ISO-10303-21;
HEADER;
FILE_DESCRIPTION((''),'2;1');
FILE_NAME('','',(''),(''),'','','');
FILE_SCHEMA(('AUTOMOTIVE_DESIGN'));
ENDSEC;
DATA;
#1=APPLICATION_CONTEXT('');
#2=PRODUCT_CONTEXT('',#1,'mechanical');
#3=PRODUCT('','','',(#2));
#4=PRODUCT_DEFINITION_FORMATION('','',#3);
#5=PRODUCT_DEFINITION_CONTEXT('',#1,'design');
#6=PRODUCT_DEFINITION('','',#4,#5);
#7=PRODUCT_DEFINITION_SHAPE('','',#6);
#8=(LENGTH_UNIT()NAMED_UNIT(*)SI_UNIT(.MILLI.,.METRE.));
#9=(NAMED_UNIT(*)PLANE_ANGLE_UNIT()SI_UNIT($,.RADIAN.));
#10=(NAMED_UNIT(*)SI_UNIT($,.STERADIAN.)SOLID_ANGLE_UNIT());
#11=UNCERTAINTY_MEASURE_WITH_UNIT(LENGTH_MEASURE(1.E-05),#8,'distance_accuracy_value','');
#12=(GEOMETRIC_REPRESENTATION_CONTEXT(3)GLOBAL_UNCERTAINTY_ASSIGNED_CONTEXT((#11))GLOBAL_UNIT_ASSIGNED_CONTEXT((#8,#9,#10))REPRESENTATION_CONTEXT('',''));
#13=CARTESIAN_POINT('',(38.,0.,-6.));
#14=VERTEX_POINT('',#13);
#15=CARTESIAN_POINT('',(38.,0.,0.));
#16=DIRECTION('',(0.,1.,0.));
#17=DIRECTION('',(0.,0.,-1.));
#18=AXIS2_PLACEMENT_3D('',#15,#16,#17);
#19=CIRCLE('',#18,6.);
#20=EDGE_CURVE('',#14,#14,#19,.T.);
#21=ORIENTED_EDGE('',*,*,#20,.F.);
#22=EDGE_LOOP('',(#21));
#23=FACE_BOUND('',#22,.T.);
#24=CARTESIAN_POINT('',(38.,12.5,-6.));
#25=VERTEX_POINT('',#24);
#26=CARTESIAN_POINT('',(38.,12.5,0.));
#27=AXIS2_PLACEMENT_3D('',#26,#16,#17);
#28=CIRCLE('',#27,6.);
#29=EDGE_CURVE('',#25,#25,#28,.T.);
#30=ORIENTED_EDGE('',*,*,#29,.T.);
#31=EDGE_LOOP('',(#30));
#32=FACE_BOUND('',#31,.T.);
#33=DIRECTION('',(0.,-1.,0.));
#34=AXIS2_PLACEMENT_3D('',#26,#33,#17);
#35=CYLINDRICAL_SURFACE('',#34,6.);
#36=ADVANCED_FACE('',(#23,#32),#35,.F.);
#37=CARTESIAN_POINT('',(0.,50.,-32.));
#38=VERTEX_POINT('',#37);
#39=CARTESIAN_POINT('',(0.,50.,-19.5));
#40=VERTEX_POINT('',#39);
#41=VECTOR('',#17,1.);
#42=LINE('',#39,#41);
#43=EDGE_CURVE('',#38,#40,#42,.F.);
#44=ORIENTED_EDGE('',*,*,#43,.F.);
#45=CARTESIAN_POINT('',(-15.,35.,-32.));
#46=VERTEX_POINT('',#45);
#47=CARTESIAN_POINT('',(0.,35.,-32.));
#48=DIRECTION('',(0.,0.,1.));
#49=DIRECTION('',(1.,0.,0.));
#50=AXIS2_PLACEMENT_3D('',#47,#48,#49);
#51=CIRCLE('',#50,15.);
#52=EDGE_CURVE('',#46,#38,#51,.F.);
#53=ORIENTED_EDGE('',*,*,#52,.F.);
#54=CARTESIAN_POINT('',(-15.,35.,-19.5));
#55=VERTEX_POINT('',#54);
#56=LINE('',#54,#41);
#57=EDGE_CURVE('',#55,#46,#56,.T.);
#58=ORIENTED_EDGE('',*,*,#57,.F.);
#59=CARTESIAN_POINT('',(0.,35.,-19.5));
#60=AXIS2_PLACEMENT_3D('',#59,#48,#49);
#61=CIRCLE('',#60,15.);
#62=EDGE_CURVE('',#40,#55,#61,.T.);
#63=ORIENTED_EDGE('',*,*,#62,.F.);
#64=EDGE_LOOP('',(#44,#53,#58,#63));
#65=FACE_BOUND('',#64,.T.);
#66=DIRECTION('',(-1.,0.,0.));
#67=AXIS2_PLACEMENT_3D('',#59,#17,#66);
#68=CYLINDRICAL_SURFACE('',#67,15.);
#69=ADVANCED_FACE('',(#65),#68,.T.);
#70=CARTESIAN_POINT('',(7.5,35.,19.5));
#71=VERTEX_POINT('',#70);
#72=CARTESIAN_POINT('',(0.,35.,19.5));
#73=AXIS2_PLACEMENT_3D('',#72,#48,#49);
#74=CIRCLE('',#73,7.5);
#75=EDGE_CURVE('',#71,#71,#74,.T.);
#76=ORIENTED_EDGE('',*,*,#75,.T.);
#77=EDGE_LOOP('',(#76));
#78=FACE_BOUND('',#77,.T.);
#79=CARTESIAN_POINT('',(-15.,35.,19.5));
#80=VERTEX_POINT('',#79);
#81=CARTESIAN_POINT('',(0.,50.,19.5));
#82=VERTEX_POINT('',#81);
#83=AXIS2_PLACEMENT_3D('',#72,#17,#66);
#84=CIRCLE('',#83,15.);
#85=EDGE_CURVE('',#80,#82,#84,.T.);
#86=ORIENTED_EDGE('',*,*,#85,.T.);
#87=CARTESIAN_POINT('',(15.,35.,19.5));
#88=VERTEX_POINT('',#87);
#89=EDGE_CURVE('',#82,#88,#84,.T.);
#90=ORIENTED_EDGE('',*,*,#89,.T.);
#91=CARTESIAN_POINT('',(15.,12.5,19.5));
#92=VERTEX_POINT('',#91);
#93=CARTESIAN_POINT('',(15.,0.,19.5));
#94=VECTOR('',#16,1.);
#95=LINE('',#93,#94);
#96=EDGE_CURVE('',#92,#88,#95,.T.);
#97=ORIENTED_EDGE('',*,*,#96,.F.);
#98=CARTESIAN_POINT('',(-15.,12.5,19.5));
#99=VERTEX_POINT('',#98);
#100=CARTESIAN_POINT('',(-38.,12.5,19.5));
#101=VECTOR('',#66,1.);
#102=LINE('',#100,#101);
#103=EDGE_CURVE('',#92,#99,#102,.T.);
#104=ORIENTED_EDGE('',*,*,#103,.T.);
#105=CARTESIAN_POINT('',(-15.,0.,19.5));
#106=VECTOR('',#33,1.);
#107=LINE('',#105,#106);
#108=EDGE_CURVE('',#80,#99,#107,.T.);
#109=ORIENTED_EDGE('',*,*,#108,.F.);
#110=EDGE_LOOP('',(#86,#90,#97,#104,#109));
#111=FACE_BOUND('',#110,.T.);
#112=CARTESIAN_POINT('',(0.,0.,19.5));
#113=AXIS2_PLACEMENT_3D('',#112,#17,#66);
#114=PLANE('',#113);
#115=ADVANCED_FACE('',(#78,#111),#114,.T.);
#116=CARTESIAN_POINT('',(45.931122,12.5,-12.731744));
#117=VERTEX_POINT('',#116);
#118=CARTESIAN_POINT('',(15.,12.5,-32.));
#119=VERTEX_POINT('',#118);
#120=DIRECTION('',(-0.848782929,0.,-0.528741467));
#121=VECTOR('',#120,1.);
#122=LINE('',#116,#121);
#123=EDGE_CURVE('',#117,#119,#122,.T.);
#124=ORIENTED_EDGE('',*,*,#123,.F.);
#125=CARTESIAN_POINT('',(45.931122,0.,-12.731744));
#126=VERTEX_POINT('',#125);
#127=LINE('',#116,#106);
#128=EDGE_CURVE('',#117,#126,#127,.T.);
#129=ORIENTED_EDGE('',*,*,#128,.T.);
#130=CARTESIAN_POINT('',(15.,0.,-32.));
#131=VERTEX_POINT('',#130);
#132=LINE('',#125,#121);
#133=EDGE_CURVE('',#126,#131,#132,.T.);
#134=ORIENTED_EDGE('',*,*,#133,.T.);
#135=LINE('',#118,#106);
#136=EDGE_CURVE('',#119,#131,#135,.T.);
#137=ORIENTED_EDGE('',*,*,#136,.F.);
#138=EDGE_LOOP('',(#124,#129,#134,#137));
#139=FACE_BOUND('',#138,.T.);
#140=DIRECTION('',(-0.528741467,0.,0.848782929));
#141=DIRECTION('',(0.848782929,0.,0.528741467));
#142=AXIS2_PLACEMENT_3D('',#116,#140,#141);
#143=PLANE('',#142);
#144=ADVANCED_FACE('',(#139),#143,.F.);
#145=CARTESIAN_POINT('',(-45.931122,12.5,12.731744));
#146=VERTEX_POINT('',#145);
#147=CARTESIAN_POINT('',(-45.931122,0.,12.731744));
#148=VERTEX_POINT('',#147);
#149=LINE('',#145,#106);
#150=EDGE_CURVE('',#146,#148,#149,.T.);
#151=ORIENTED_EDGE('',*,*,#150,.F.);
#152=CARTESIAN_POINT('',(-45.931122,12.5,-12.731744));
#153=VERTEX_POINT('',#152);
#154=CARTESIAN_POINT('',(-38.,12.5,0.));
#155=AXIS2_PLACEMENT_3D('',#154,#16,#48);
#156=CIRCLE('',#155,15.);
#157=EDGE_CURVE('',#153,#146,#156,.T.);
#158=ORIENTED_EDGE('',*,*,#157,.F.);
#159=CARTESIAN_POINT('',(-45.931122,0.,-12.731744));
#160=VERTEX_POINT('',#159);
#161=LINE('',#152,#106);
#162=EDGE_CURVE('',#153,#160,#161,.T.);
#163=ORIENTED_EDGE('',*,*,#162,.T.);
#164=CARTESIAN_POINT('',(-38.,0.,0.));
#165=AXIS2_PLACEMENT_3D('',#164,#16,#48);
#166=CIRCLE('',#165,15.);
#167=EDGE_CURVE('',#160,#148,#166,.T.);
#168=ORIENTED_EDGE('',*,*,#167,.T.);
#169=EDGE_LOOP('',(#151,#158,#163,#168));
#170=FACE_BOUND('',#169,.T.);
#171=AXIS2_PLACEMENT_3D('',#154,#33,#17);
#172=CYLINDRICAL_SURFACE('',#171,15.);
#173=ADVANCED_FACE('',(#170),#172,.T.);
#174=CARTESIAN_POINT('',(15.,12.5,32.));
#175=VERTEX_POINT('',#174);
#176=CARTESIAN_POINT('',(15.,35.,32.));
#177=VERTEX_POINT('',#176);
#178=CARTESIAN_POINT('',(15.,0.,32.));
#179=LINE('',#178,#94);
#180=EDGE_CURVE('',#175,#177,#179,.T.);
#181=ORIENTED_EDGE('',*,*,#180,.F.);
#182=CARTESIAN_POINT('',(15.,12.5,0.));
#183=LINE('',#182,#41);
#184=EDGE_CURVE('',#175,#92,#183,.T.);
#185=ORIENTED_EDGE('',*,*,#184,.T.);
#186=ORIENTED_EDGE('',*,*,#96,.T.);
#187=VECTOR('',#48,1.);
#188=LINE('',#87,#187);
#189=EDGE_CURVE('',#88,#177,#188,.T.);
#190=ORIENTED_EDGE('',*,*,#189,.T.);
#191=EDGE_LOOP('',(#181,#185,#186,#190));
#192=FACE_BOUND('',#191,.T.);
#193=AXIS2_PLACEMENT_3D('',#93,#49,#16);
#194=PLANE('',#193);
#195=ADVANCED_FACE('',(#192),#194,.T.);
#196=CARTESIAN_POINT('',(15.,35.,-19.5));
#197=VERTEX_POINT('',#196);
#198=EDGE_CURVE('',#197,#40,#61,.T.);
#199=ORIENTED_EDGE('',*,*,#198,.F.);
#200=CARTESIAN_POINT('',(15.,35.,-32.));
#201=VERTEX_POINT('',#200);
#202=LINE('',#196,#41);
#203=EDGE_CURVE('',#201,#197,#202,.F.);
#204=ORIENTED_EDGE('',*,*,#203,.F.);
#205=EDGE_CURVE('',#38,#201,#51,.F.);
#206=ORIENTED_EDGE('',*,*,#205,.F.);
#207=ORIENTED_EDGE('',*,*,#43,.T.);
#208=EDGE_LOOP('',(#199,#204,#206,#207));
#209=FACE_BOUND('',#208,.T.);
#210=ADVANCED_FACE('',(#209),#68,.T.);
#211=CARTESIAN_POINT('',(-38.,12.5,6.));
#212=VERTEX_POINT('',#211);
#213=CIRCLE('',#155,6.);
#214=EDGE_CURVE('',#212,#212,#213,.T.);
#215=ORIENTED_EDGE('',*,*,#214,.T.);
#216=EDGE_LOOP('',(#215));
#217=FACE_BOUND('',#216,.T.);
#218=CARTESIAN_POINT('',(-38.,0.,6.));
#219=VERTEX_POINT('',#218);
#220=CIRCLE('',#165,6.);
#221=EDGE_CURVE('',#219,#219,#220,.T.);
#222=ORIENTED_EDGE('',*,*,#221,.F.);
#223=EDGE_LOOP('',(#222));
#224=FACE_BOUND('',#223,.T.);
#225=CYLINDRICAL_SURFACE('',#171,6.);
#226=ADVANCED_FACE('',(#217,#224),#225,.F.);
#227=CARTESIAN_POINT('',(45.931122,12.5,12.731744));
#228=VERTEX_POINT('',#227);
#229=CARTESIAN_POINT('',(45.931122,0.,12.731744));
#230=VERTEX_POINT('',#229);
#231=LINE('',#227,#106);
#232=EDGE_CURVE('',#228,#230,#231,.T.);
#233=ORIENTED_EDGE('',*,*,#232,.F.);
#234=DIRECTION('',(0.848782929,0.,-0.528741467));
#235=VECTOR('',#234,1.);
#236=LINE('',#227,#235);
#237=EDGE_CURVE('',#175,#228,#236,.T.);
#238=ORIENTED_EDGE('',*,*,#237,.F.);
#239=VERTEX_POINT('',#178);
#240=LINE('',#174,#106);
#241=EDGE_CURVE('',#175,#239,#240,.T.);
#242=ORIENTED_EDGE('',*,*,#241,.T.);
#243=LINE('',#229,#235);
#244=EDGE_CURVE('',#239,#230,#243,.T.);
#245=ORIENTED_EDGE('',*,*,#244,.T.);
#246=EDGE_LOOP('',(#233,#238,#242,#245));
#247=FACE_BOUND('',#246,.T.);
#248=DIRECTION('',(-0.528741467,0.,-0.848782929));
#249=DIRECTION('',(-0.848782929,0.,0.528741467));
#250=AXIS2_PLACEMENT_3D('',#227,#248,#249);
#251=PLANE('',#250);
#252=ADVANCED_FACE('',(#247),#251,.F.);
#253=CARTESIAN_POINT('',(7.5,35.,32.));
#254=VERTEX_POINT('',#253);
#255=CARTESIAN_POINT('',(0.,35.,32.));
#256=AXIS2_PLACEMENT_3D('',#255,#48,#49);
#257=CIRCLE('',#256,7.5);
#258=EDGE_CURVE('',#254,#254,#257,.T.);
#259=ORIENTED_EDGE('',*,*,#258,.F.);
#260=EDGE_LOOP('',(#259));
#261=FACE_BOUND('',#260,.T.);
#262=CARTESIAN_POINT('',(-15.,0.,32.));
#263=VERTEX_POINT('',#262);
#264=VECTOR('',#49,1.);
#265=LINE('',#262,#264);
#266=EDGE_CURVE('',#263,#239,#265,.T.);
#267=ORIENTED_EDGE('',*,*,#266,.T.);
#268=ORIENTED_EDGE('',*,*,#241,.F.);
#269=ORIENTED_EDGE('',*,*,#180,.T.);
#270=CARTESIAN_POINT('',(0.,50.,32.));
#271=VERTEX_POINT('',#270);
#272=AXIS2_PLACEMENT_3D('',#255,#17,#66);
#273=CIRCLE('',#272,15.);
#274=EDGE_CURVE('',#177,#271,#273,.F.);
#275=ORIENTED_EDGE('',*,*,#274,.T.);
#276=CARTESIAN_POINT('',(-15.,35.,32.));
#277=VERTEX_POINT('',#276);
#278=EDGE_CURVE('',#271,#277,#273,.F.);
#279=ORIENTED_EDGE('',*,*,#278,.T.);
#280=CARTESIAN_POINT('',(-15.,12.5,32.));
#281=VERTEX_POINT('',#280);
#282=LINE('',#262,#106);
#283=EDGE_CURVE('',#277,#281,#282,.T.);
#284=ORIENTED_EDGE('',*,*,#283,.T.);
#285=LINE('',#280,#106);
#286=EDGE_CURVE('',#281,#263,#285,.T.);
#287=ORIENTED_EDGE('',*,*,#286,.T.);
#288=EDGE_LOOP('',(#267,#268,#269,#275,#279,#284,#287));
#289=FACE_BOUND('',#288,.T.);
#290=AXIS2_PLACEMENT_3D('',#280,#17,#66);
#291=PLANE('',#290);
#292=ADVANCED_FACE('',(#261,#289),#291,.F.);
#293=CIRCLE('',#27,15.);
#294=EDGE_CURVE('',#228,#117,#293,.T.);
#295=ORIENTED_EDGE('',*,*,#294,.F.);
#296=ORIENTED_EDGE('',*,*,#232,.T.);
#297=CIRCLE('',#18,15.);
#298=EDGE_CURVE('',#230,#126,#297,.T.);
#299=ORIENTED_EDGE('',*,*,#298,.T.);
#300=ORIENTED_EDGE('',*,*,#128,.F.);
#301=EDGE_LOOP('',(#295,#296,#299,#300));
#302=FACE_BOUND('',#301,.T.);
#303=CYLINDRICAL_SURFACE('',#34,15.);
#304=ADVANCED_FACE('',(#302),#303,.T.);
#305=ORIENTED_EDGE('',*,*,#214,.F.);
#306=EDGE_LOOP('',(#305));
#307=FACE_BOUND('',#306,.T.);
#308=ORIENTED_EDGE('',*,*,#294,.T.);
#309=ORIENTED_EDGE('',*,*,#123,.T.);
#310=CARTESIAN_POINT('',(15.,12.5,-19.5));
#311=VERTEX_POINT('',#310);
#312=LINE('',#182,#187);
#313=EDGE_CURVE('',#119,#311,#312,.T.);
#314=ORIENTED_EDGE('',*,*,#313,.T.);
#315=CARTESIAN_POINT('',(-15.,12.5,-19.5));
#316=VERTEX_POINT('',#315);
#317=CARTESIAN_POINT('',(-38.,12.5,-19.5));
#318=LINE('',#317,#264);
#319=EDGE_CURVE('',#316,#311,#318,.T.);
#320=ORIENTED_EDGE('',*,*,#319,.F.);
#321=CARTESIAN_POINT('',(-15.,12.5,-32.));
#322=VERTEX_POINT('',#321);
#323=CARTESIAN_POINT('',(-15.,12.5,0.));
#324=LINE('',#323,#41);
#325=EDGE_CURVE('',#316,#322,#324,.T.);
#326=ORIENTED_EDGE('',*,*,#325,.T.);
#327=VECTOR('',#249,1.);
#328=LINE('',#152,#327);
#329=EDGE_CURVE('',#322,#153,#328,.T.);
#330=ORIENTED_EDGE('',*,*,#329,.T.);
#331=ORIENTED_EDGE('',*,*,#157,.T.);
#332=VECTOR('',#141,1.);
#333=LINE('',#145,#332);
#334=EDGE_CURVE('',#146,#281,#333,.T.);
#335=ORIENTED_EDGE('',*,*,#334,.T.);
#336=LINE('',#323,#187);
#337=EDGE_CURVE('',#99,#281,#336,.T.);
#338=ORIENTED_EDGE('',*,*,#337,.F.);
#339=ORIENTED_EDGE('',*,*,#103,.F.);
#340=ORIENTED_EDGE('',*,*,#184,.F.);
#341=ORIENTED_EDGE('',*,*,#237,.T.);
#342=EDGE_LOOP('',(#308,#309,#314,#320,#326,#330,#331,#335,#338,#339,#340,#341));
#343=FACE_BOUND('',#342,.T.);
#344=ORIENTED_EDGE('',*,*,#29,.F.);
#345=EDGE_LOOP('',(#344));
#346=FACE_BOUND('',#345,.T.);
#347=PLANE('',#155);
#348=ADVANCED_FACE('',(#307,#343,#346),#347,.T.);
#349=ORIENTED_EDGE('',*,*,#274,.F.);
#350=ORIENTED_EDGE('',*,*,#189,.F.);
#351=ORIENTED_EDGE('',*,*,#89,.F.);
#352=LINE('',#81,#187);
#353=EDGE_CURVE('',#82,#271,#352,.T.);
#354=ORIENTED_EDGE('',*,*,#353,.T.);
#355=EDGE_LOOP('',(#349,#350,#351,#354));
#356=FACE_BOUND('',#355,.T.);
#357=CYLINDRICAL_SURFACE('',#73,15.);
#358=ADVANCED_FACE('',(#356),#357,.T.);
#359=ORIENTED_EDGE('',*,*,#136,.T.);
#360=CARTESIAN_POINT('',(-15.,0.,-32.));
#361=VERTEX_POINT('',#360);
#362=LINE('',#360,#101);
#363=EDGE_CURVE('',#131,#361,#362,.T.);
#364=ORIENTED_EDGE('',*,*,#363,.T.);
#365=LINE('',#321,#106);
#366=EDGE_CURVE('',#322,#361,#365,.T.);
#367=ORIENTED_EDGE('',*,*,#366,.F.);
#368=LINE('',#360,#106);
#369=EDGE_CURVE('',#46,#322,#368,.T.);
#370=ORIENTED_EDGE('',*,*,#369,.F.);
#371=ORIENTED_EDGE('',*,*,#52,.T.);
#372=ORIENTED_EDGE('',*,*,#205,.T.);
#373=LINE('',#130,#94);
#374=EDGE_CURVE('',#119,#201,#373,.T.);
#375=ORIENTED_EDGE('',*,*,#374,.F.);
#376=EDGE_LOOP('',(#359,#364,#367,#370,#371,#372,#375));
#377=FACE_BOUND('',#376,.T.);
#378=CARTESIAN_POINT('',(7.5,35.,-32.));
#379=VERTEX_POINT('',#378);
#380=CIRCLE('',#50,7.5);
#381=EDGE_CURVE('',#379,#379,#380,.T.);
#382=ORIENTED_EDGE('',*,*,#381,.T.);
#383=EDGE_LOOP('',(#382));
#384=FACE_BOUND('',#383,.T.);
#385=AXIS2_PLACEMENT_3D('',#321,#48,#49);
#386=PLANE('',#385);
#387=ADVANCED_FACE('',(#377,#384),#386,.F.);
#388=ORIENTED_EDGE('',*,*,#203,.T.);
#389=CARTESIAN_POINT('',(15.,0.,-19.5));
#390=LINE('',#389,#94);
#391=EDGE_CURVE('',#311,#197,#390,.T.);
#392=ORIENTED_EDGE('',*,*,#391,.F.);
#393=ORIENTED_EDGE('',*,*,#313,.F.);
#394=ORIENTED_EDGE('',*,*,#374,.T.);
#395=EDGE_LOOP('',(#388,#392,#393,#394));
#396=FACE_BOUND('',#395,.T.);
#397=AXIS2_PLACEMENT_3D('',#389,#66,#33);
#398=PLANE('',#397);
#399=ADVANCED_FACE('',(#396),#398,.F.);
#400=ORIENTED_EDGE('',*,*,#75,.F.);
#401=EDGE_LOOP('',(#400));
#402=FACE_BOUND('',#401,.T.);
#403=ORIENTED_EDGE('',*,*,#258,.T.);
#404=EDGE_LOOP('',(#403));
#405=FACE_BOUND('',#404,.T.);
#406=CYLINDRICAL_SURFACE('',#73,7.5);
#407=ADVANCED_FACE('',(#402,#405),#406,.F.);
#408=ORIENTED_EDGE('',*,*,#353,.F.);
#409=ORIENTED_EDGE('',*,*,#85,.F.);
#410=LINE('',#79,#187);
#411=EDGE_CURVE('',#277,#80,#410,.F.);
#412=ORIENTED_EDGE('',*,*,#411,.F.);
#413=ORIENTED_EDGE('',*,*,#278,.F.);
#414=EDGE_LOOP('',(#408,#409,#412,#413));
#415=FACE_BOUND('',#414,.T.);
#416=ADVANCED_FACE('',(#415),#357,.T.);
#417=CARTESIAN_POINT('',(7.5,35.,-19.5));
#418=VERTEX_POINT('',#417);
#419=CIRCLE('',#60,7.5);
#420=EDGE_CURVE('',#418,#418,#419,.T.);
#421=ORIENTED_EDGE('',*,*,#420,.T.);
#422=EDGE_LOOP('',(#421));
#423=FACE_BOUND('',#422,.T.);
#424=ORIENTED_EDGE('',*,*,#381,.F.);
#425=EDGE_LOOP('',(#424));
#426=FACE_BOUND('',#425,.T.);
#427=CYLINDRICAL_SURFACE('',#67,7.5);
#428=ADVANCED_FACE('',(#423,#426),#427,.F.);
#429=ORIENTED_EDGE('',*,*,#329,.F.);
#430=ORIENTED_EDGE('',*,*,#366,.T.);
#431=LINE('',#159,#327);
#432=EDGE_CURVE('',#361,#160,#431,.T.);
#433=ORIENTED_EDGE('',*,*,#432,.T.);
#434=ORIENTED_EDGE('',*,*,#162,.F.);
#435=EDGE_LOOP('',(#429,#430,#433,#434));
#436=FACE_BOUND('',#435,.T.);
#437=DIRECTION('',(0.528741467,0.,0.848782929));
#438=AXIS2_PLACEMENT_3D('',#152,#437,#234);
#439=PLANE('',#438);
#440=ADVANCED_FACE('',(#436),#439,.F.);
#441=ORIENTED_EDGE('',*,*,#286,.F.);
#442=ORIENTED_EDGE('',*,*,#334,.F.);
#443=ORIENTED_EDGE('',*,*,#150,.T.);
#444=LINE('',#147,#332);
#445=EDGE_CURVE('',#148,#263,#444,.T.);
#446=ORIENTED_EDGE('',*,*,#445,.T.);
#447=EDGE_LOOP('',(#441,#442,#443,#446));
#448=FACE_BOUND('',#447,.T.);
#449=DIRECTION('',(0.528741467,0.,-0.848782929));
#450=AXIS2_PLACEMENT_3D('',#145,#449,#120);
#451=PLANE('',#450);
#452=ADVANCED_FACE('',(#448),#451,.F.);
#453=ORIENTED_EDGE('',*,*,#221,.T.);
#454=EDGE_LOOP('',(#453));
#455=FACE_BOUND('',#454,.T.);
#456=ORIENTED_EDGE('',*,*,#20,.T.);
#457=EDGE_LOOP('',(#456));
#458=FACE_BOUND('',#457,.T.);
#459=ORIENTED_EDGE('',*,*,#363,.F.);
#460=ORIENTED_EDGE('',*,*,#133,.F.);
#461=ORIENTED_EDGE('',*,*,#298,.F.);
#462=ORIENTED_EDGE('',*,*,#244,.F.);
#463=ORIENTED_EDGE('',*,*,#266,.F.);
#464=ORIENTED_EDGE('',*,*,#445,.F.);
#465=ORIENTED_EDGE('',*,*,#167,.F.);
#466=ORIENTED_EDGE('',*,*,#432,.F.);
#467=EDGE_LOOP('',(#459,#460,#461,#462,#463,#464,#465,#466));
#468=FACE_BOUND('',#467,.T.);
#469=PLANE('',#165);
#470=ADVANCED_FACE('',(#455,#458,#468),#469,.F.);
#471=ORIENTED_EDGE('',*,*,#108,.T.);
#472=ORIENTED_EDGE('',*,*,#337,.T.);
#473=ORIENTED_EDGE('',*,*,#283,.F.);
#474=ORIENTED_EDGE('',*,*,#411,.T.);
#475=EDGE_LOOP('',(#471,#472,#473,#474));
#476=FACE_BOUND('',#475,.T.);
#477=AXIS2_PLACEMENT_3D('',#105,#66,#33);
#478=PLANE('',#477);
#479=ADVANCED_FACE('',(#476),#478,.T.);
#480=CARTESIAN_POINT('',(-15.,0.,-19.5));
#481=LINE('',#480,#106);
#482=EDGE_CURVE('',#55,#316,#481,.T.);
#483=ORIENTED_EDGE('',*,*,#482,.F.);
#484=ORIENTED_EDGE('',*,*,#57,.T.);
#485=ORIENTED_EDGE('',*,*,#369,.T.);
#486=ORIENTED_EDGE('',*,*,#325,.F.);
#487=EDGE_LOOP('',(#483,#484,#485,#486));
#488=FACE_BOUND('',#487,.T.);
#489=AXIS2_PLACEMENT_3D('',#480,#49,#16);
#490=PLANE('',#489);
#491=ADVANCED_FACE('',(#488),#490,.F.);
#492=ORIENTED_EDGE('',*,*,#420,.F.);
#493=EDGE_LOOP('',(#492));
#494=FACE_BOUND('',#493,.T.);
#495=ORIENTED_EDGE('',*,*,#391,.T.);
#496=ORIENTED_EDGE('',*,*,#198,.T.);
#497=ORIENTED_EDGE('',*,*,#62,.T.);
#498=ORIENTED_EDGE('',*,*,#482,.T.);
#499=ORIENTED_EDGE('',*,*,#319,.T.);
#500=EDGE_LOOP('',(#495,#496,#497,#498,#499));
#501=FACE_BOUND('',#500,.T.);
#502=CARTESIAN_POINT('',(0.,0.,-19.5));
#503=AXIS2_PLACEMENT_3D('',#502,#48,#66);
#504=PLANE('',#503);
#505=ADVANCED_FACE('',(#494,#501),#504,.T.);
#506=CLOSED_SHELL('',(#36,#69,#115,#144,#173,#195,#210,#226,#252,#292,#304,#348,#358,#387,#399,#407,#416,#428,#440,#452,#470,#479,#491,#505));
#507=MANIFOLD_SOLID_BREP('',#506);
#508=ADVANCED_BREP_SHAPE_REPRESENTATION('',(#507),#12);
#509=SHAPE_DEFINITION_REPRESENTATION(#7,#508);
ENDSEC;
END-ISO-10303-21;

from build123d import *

# Parameters (mm, degrees)
SKETCH1_R            = 6
BOSS_EXTRUDE1_DEPTH  = 12.5
SKETCH2_W            = 30
SKETCH2_H            = 50
SKETCH2_R            = 7.5
BOSS_EXTRUDE2_DEPTH  = 12.5
FILLET1_R            = 15
FILLET1_OF_MIRROR1_R = 15


with BuildPart() as part:
    # Sketch1 → Boss-Extrude1 (new body)
    with BuildSketch(Plane(origin=(0, 0, 0), x_dir=(1, 0, 0), z_dir=(0, 1, 0))):
        with BuildLine():
            Line((-45.931122004, 12.73174394), (-15, 32))
            Line((-15, 32), (15, 32))
            Line((15, 32), (45.931122004, 12.73174394))
            ThreePointArc((45.931122004, 12.73174394), (53, 0), (45.931122004, -12.73174394))
            Line((45.931122004, -12.73174394), (15, -32))
            Line((15, -32), (-15, -32))
            Line((-15, -32), (-45.931122004, -12.73174394))
            ThreePointArc((-45.931122004, -12.73174394), (-53, 0), (-45.931122004, 12.73174394))
        make_face()
        with Locations(Location((-38, 0, 0), (0, 0, 270))):
            Circle(SKETCH1_R, mode=Mode.SUBTRACT)
        with Locations(Location((38, 0, 0), (0, 0, 90))):
            Circle(SKETCH1_R, mode=Mode.SUBTRACT)
    extrude(amount=BOSS_EXTRUDE1_DEPTH)

    # Sketch2 → Boss-Extrude2 (add)
    with BuildSketch(Plane.XY.offset(32)):
        with Locations((0, 25)):
            Rectangle(SKETCH2_W, SKETCH2_H)
        with Locations((0, 35)):
            Circle(SKETCH2_R, mode=Mode.SUBTRACT)
    boss_extrude2 = extrude(amount=-BOSS_EXTRUDE2_DEPTH)

    # Fillet1
    fillet1_edges = [part.edges().sort_by_distance(p)[0] for p in [
        (15, 50, 25.75),
        (-15, 50, 25.75),
    ]]
    fillet(fillet1_edges, radius=FILLET1_R - 0.0001)  # a hair under: the kernel refuses the full size

    # Mirror1: Boss-Extrude2 across plane
    add(boss_extrude2.mirror(Plane.XY))

    # Fillet1 of Mirror1
    fillet1_of_mirror1_edges = [part.edges().sort_by_distance(p)[0] for p in [
        (15, 50, -25.75),
        (-15, 50, -25.75),
    ]]
    fillet(fillet1_of_mirror1_edges, radius=FILLET1_OF_MIRROR1_R - 0.0001)  # a hair under: the kernel refuses the full size


solid = part.part
